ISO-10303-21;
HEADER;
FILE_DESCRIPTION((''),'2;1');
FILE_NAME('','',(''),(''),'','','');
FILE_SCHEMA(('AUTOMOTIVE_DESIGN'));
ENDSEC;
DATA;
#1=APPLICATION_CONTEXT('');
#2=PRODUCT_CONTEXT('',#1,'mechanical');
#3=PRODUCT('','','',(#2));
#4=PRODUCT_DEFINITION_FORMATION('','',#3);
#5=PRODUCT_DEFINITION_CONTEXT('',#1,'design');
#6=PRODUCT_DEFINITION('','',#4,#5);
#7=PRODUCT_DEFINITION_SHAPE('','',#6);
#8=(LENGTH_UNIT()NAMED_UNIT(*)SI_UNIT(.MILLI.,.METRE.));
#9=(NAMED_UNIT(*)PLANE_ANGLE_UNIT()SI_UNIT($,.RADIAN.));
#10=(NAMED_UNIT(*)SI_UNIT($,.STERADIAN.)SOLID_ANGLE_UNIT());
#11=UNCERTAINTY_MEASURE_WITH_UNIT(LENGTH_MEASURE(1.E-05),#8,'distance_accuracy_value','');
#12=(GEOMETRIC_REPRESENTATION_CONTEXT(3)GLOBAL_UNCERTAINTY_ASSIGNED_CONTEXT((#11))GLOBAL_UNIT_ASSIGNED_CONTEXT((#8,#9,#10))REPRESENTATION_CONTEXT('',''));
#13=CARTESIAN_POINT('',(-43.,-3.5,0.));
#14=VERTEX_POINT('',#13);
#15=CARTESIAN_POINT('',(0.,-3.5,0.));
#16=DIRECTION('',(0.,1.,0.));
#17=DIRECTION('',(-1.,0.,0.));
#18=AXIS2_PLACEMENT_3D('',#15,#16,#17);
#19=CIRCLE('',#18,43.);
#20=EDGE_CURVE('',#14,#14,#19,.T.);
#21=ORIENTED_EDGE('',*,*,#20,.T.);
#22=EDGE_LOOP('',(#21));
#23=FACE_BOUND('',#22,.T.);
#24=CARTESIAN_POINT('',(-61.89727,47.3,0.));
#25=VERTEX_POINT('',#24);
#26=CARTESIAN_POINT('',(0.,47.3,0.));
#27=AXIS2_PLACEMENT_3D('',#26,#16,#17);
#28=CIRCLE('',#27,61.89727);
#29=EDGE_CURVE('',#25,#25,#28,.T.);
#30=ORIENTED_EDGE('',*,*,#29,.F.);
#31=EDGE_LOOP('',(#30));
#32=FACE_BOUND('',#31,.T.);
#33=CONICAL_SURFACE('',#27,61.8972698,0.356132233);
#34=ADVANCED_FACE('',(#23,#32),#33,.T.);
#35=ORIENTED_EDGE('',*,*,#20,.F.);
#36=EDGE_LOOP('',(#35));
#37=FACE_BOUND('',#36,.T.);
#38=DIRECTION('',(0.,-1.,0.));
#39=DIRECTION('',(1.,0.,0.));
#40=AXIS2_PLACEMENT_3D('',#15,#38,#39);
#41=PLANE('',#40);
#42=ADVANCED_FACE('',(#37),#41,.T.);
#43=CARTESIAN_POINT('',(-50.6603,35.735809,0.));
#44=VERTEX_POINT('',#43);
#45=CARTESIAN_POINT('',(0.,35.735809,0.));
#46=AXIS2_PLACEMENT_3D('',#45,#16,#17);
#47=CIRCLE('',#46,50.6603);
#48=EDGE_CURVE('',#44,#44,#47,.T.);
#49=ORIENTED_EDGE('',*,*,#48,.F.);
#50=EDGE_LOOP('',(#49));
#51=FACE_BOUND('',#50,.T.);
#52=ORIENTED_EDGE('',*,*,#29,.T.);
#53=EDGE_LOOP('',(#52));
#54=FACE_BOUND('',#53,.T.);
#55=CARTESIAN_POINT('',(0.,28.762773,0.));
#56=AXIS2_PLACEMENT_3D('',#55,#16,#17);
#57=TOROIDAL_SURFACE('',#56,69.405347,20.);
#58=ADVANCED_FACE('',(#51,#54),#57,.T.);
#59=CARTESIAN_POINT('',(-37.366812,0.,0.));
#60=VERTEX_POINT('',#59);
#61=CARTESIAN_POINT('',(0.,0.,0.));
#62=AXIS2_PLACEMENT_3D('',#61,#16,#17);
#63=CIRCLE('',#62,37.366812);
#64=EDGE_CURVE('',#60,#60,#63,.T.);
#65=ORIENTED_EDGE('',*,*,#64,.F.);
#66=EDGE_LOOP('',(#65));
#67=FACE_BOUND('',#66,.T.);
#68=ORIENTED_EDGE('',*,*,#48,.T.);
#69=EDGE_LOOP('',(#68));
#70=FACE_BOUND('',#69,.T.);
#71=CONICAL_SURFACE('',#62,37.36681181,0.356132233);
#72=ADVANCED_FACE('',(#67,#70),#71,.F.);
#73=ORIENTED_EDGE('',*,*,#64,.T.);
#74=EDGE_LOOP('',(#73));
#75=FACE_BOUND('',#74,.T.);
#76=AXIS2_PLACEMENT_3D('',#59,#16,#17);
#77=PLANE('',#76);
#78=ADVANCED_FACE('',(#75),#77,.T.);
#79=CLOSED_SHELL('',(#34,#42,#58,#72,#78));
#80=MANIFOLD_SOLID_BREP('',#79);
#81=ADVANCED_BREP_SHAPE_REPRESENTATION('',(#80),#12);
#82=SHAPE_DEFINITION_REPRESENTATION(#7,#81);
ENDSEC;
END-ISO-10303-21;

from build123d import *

# Parameters (mm, degrees)
FILLET1_R = 20


with BuildPart() as part:
    # Sketch1 → Revolve1 (revolve)
    with BuildSketch(Plane.XY):
        Polygon((0, 0), (0, -3.5), (-43, -3.5), (-61.8972698, 47.3), (-54.962104359, 47.3), (-37.36681181, 0), align=None)
    revolve(axis=Axis((0, 4.969881122, 0), (0, -1, 0)))

    # Fillet1
    # the kernel refuses this fillet: 20 mm, written as the material it takes off along each edge
    with BuildSketch(Plane(origin=(0, 47.3, 0), x_dir=(-1, 0, 0), z_dir=(0, 0, 1))) as fillet1_piece_1:
        with BuildLine():
            CenterArc((69.405347087, 18.537226746), FILLET1_R, 200.40487389, 47.545849796)
            Line((50.660300393, 11.56419122), (50.285399459, 11.424730509))
            Line((50.285399459, 11.424730509), (54.587203426, -0.139460711))
            Line((54.587203426, -0.139460711), (54.962104359, -0.4))
            ThreePointArc((54.962104359, -0.4), (58.42968708, -0.4), (61.747108254, -0.370744535))
            Line((61.747108254, -0.370744535), (61.8972698, 0))
        make_face()
    revolve(axis=Axis((0, 47.3, 0), (0, -1, 0)), mode=Mode.SUBTRACT)


solid = part.part
